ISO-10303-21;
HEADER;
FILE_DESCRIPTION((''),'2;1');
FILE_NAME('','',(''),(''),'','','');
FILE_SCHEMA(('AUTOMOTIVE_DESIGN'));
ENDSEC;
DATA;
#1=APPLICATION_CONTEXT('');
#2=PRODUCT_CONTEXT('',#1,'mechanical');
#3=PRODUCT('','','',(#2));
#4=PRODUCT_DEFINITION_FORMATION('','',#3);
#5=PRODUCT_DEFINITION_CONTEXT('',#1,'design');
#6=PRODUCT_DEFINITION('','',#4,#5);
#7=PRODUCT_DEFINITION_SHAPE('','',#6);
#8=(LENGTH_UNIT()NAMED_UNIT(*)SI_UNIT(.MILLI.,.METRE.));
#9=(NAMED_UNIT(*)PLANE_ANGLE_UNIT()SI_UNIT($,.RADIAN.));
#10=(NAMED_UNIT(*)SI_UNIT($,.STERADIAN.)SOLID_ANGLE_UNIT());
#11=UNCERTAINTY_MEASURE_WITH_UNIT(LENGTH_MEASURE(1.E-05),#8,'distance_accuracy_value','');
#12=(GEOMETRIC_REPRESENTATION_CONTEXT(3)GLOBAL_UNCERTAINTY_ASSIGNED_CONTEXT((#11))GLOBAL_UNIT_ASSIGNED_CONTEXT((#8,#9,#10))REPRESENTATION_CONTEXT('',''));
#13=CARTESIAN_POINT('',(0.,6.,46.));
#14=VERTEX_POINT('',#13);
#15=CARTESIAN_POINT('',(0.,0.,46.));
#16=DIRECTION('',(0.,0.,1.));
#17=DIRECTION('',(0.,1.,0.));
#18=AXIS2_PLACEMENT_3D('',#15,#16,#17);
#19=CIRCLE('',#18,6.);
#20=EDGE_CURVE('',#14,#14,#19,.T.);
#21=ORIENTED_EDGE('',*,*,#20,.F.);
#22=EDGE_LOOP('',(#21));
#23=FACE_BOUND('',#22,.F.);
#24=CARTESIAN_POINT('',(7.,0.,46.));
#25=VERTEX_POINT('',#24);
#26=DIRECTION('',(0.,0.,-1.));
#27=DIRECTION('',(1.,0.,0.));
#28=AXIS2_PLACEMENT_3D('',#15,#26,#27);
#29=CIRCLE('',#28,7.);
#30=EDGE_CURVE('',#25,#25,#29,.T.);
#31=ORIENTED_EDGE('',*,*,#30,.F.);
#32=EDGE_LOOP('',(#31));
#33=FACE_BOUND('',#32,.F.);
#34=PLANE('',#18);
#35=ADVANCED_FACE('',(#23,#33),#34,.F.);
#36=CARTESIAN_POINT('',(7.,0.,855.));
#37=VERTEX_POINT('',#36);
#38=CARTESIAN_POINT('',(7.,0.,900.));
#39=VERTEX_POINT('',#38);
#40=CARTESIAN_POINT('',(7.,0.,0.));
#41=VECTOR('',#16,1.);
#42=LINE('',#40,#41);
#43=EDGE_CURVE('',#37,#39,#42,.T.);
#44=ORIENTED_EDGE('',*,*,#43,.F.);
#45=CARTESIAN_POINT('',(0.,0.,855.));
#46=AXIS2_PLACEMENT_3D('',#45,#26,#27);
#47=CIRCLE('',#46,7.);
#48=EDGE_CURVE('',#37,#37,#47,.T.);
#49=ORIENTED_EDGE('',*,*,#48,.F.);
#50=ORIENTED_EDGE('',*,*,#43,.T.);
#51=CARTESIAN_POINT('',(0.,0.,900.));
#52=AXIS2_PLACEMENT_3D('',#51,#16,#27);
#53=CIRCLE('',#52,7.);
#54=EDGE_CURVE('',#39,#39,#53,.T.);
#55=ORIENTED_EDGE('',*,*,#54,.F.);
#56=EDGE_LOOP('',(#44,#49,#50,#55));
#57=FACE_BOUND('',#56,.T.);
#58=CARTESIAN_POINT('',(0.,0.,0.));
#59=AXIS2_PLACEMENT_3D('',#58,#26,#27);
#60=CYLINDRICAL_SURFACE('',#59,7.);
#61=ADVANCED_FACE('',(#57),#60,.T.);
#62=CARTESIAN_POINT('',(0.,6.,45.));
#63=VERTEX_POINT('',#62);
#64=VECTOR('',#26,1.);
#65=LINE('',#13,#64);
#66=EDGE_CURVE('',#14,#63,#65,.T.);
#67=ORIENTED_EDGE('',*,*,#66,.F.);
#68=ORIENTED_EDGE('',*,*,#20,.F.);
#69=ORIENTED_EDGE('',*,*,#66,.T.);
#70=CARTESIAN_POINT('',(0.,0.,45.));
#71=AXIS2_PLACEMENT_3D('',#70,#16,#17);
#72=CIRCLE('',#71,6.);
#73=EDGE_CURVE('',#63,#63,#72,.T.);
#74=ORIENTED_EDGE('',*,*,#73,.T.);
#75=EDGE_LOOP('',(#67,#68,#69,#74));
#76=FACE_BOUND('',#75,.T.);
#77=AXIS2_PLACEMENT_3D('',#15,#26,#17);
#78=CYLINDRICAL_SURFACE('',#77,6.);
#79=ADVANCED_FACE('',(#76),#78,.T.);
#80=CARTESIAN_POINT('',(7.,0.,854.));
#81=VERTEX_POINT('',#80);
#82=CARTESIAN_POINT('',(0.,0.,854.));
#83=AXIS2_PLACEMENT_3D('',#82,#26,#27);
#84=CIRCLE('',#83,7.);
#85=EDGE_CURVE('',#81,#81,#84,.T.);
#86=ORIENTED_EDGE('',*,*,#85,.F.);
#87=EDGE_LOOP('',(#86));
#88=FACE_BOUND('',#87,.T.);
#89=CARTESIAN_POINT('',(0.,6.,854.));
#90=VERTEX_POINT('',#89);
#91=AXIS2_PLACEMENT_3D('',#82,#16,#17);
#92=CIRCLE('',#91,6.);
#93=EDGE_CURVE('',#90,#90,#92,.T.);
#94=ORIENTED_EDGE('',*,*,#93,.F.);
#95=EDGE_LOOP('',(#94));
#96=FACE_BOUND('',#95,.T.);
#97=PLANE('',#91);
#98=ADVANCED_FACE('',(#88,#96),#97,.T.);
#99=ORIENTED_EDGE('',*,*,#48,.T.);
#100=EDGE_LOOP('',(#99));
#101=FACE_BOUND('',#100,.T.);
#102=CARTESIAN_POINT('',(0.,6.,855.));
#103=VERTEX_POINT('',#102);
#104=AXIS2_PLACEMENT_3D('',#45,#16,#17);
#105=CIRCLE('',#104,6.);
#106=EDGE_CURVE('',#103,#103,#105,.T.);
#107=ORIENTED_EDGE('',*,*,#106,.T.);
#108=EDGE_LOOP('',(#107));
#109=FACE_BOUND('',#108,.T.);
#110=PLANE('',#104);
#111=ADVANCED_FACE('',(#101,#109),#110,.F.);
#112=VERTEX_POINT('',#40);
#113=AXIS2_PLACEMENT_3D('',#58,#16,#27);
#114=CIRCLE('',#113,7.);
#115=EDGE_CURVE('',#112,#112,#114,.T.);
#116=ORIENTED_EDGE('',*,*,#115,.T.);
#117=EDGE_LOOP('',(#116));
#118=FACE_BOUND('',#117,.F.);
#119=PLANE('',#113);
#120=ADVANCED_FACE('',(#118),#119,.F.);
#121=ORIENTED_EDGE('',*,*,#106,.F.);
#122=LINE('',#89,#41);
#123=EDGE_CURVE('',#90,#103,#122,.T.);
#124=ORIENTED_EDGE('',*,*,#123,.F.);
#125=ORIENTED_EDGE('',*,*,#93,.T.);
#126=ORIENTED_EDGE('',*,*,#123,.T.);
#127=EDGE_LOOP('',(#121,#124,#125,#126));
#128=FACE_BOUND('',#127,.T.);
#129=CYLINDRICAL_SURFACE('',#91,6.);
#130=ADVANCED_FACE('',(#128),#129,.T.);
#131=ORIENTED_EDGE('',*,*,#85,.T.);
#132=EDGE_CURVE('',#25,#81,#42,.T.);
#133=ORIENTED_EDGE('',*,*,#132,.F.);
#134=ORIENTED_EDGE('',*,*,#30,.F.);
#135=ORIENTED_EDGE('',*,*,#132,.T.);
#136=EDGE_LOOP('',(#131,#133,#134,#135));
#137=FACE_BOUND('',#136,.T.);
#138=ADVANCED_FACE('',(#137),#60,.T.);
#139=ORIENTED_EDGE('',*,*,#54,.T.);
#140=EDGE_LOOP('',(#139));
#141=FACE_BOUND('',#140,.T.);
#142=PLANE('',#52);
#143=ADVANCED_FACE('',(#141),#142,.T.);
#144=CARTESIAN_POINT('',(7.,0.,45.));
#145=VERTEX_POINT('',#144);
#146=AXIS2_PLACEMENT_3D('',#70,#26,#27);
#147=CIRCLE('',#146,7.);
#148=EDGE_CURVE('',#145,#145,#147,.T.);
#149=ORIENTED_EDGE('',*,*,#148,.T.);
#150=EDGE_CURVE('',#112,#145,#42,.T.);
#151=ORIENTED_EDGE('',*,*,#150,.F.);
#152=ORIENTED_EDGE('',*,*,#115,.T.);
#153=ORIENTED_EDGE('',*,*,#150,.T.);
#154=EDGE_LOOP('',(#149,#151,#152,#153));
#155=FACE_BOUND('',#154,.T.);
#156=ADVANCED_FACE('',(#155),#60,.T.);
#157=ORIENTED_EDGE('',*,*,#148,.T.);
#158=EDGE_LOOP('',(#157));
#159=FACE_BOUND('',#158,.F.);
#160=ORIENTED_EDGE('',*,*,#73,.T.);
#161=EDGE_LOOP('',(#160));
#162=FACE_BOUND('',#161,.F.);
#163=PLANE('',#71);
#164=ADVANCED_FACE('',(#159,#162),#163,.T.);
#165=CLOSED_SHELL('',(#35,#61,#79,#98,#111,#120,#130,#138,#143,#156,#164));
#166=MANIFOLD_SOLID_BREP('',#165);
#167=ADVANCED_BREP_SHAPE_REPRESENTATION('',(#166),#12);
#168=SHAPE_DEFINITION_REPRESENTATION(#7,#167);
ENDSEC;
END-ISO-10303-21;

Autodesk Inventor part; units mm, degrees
ref_plane "YZ Plane" through (0, 0, 0) normal (1, 0, 0) x (0, 1, 0)
ref_plane "XZ Plane" through (0, 0, 0) normal (0, 1, 0) x (-1, 0, 0)
ref_plane "XY Plane" through (0, 0, 0) normal (0, 0, 1) x (1, 0, 0)
sketch "Эскиз1" plane through (0, 0, 0) normal (0, 0, 1) x (1, 0, 0)
  circle A0 centre (0, 0) radius 7
  dimension "d0" = 14
extrude "Выдавливание1" add sketch "Эскиз1" along normal blind 900
sketch "Эскиз2" plane through (0, 0, 0) normal (1, 0, 0) x (0, 1, 0)
  line L0 (7, 900) -> (-7, 900) projected
  line L1 (7, 0) -> (-7, 0) projected
  line L2 (0, 0) -> (0, 45)
  line L3 (0, 45) -> (7, 45)
  line L4 (7, 0) -> (7, 900) projected
  line L5 (7, 45) -> (7, 46)
  line L6 (7, 46) -> (0, 46)
  line L7 (0, 46) -> (0, 45)
  line L8 (0, 900) -> (0, 855)
  line L9 (0, 855) -> (7, 855)
  line L10 (7, 855) -> (7, 854)
  line L11 (0, -180) -> (0, 1080) projected
  line L12 (7, 854) -> (0, 854)
  line L13 (0, 855) -> (0, 854)
  line L14 (0, 46) -> (0, 45)
  line L15 (7, 46) -> (6, 46)
  line L16 (6, 46) -> (6, 45)
  line L17 (7, 855) -> (6, 855)
  line L18 (6, 854) -> (6, 855)
  dimension "d3" = 45
  dimension "d4" = 45
  dimension "d5" = 1
revolve "Вращение1" cut sketch "Эскиз2" angle 360 about axis through (0, 0, -10) along (0, 0, 1) contours L4 L12 L18 L9 | L4 L3 L16 L6
thread "Резьба1" size "M14x2" class "6g" standard "ANSI Metric M Profile" full length
thread "Резьба2" size "M14x2" class "6g" standard "ANSI Metric M Profile" full length
properties part number "Стяжка" material "Сталь, высокопрочная, низколегированная"
